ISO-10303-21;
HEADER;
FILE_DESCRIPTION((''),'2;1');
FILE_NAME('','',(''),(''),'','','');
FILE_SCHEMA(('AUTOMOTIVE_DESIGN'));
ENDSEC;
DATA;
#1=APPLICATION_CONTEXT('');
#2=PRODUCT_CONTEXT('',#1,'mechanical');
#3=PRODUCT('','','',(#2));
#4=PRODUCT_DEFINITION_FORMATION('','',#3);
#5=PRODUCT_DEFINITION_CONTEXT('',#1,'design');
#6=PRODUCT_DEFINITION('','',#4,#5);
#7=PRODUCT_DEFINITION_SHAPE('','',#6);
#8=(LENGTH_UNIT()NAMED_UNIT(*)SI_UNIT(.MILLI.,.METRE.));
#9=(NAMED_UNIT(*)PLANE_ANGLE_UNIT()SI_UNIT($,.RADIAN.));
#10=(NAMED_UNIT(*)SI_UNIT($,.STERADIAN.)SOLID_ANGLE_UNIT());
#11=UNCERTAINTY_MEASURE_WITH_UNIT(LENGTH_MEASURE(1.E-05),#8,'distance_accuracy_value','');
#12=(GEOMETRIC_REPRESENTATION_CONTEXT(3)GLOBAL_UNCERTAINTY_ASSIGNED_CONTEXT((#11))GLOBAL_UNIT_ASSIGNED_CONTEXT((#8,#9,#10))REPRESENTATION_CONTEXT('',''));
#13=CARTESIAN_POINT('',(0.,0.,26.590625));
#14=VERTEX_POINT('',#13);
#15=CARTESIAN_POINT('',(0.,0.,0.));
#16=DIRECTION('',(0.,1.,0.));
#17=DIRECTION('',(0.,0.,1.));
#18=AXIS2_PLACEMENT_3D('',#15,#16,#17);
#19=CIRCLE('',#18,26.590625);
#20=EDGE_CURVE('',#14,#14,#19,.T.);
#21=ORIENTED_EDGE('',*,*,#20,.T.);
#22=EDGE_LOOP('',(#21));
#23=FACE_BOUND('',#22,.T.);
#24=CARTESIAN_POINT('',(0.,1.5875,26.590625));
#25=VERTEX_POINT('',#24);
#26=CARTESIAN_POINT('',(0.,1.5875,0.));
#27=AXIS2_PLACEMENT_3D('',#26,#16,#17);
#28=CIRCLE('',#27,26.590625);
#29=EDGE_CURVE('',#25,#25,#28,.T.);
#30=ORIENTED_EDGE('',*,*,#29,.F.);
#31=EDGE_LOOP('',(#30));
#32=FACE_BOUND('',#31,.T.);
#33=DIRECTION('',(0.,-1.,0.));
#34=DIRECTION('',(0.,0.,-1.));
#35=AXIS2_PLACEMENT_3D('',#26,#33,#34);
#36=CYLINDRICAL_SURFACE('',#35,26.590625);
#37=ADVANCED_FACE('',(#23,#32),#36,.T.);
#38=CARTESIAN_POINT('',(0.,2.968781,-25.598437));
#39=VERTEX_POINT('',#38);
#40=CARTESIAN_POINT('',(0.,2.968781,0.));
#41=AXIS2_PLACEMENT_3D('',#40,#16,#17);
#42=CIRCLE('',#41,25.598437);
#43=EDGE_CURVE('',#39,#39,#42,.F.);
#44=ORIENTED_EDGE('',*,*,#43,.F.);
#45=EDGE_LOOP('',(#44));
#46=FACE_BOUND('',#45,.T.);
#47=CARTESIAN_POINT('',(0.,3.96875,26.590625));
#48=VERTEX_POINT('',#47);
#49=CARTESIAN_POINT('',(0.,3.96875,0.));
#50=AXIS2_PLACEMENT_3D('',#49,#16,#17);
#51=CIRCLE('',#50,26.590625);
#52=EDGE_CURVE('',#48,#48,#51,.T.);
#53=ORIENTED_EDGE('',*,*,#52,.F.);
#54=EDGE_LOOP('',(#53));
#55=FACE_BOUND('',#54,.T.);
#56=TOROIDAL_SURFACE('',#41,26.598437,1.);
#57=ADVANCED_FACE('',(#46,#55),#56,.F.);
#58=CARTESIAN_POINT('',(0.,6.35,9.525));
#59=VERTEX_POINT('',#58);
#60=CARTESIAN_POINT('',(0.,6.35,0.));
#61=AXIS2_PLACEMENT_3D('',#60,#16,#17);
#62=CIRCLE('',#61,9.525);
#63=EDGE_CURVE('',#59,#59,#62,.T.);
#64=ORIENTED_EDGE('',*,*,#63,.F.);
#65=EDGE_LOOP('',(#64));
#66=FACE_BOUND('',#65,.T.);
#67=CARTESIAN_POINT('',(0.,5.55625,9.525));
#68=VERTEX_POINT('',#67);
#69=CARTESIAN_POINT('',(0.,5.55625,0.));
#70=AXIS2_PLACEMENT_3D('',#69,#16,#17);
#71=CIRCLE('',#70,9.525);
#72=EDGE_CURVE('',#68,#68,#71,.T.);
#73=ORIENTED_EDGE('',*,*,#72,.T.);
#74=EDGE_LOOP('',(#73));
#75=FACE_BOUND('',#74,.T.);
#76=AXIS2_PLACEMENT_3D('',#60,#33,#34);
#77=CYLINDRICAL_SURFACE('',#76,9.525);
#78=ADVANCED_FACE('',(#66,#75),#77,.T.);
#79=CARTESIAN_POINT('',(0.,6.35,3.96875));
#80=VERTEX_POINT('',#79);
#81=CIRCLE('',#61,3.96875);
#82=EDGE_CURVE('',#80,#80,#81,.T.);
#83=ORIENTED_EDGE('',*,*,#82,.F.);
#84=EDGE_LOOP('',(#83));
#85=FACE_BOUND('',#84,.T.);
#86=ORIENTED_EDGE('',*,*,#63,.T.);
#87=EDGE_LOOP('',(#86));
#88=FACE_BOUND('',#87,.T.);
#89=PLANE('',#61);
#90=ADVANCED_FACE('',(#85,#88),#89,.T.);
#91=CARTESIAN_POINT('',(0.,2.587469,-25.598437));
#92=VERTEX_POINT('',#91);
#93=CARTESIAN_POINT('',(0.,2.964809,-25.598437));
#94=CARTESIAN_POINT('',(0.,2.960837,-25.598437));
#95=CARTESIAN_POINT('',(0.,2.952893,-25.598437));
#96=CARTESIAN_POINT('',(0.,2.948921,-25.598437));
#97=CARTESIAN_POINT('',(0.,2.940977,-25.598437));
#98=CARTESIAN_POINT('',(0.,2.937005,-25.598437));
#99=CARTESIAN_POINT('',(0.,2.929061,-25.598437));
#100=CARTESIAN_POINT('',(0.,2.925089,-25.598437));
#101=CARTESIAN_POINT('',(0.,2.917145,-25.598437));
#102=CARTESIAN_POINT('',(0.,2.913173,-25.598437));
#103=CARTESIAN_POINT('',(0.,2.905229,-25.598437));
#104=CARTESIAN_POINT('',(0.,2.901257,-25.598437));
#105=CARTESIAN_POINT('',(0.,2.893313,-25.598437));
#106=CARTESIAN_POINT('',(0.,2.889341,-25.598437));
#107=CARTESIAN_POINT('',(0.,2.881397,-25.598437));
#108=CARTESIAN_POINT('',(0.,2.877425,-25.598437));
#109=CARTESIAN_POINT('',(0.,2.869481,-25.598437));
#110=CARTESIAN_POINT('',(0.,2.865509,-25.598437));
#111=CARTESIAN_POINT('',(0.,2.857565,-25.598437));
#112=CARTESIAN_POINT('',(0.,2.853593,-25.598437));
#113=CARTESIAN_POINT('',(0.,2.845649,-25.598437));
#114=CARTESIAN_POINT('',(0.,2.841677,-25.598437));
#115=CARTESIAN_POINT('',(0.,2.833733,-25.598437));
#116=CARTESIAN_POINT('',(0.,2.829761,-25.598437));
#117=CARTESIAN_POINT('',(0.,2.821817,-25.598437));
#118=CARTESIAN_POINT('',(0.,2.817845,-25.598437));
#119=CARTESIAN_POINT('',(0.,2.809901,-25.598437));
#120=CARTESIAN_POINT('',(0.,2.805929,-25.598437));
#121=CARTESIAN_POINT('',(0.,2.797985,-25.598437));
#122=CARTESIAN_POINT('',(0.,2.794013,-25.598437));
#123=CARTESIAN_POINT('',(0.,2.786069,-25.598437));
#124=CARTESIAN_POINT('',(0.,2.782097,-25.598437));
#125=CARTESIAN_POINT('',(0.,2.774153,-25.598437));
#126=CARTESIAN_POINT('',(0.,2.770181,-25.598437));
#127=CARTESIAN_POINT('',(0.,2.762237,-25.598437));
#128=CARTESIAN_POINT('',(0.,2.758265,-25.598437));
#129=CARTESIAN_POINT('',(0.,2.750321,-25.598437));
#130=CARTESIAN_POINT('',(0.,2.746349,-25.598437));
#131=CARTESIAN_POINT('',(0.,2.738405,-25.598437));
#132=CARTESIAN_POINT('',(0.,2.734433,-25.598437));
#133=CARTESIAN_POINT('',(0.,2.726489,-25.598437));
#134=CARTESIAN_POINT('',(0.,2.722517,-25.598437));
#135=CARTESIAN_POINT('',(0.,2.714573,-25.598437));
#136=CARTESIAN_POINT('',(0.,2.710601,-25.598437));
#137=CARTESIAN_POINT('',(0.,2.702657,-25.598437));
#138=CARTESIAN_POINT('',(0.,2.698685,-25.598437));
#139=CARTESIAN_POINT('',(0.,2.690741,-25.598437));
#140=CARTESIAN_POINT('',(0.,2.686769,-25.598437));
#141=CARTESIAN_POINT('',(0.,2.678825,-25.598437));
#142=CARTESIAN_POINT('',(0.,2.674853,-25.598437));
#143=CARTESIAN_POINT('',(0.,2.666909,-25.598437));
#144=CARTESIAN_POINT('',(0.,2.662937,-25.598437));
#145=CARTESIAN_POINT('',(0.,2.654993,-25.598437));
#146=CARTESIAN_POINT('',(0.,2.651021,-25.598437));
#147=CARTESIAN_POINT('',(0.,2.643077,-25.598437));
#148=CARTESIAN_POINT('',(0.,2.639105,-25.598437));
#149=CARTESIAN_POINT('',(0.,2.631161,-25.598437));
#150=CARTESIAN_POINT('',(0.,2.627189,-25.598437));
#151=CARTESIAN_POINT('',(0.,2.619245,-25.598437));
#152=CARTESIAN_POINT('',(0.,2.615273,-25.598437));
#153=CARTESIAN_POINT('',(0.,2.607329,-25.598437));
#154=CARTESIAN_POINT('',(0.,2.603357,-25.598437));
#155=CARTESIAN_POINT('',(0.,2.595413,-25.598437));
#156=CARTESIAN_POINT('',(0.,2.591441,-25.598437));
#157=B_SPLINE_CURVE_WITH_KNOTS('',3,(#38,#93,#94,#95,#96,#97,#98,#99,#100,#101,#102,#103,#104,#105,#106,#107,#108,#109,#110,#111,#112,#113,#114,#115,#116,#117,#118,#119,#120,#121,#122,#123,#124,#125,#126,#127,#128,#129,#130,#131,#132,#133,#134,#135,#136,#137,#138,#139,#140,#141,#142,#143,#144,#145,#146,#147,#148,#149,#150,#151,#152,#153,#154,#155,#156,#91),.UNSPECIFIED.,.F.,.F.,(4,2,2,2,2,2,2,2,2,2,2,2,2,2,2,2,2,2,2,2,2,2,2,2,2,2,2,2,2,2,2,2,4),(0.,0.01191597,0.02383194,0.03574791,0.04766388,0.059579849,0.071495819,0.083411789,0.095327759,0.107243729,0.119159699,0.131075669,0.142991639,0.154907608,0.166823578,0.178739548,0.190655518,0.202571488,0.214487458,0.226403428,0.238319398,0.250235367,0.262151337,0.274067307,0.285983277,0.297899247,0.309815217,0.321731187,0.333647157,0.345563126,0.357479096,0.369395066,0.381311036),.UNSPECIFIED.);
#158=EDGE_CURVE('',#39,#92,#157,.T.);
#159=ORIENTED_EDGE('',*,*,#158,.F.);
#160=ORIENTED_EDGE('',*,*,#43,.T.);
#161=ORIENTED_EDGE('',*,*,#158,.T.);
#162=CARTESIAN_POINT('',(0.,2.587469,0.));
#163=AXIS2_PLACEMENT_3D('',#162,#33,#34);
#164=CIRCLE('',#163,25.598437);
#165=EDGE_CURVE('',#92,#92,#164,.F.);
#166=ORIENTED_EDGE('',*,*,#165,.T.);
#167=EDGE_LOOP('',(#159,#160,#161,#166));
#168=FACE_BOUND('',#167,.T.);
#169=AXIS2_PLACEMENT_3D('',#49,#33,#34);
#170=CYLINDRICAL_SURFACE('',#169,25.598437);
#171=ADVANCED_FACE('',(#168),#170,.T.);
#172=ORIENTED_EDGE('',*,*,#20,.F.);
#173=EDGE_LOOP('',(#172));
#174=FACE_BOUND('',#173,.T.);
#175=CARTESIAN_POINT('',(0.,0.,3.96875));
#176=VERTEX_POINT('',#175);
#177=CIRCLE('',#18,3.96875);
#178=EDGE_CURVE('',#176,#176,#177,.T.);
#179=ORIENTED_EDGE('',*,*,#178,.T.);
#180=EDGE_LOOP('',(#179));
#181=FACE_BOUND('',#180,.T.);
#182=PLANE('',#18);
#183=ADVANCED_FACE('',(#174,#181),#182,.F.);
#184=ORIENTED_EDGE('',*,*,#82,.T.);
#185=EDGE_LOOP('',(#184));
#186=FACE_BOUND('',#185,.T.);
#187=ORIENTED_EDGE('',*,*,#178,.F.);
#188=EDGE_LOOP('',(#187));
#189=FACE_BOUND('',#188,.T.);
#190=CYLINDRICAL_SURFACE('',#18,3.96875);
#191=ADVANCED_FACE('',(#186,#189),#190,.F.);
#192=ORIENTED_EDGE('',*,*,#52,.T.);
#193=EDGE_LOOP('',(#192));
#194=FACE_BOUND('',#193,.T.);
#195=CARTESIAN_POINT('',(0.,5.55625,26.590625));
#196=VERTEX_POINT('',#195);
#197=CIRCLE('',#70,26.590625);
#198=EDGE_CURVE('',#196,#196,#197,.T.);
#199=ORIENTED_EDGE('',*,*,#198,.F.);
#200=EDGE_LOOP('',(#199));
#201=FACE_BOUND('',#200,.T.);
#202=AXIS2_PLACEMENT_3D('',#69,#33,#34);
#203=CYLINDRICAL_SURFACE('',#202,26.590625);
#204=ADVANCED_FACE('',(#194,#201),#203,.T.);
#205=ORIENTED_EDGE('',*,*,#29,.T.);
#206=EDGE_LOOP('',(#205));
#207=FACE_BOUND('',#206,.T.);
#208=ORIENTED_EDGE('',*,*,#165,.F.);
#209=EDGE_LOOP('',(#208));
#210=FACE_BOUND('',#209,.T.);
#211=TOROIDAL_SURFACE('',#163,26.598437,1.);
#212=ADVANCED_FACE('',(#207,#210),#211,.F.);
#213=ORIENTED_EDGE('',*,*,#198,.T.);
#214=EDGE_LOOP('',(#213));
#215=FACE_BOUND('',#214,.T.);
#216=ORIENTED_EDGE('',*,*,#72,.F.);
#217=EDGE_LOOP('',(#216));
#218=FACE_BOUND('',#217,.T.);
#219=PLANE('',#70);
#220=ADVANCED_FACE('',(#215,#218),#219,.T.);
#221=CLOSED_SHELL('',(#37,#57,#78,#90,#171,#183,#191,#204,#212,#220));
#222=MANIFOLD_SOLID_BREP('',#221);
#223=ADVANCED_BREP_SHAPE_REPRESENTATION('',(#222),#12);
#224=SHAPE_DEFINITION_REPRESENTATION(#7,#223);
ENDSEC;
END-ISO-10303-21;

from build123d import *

# Parameters (mm, degrees)
SKETCH1_R           = 26.590625
BOSS_EXTRUDE1_DEPTH = 1.5875
SKETCH2_R           = 25.5984375
BOSS_EXTRUDE2_DEPTH = 2.38125
SKETCH3_R           = 26.590625
BOSS_EXTRUDE3_DEPTH = 1.5875
SKETCH5_R           = 9.525
BOSS_EXTRUDE4_DEPTH = 0.79375
SKETCH6_R           = 3.96875
CUT_EXTRUDE1_DEPTH  = 39.137188881
FILLET1_R           = 1
FILLET2_R           = 1


with BuildPart() as part:
    # Sketch1 → Boss-Extrude1 (new body)
    with BuildSketch(Plane(origin=(0, 0, 0), x_dir=(1, 0, 0), z_dir=(0, 1, 0))):
        with Locations(Location((0, 0, 0), (0, 0, 270))):
            Circle(SKETCH1_R)
    extrude(amount=BOSS_EXTRUDE1_DEPTH)

    # Sketch2 → Boss-Extrude2 (add)
    with BuildSketch(Plane(origin=(0, 1.5875, 0), x_dir=(1, 0, 0), z_dir=(0, 1, 0))):
        with Locations(Location((0, 0, 0), (0, 0, 90))):
            Circle(SKETCH2_R)
    extrude(amount=BOSS_EXTRUDE2_DEPTH)

    # Sketch3 → Boss-Extrude3 (add)
    with BuildSketch(Plane(origin=(0, 3.96875, 0), x_dir=(1, 0, 0), z_dir=(0, 1, 0))):
        with Locations(Location((0, 0, 0), (0, 0, 270))):
            Circle(SKETCH3_R)
    extrude(amount=BOSS_EXTRUDE3_DEPTH)

    # Sketch5 → Boss-Extrude4 (add)
    with BuildSketch(Plane(origin=(0, 5.55625, 0), x_dir=(1, 0, 0), z_dir=(0, 1, 0))):
        with Locations(Location((0, 0, 0), (0, 0, 270))):
            Circle(SKETCH5_R)
    extrude(amount=BOSS_EXTRUDE4_DEPTH)

    # Sketch6 → Cut-Extrude1 (cut, through all)
    with BuildSketch(Plane(origin=(0, 6.35, 0), x_dir=(1, 0, 0), z_dir=(0, 1, 0))):
        with Locations(Location((0, 0, 0), (0, 0, 270))):
            Circle(SKETCH6_R)
    extrude(amount=-CUT_EXTRUDE1_DEPTH, mode=Mode.SUBTRACT)

    # Fillet1
    # the kernel refuses this fillet: 1 mm, written as the material it adds along each edge
    with BuildSketch(Plane(origin=(0, 1.5875, 0), x_dir=(0, 0, -1), z_dir=(1, 0, 0))) as fillet1_piece_1_section:
        with BuildLine():
            CenterArc((25.5984375 + FILLET1_R, FILLET1_R), FILLET1_R, 180, 90)
            Line((25.5984375 + FILLET1_R, 0), (25.5984375, 0))
            Line((25.5984375, 0), (25.5984375, FILLET1_R))
        make_face()
    fillet1_piece_1 = revolve(axis=Axis((0, 1.5875, 0), (0, 1, 0)), mode=Mode.PRIVATE)
    fillet1_piece_1 = fillet1_piece_1 & Plane(origin=(0, 1.858804506, 0), x_dir=(0, 0, 1), z_dir=(0, -1, 0)) * Cylinder(26.590625, 107, mode=Mode.PRIVATE)
    add(fillet1_piece_1)

    # Fillet2
    # the kernel refuses this fillet: 1 mm, written as the material it adds along each edge
    with BuildSketch(Plane(origin=(0, 3.96875, 0), x_dir=(0, 0, -1), z_dir=(1, 0, 0))) as fillet2_piece_1_section:
        with BuildLine():
            CenterArc((25.5984375 + FILLET2_R, -FILLET2_R), FILLET2_R, 90, 90)
            Line((25.5984375 + FILLET2_R, 0), (25.5984375, 0))
            Line((25.5984375, 0), (25.5984375, -FILLET2_R))
        make_face()
    fillet2_piece_1 = revolve(axis=Axis((0, 3.96875, 0), (0, 1, 0)), mode=Mode.PRIVATE)
    fillet2_piece_1 = fillet2_piece_1 & Plane(origin=(0, 3.697445494, 0), x_dir=(0, 0, 1), z_dir=(0, -1, 0)) * Cylinder(26.590625, 107, mode=Mode.PRIVATE)
    add(fillet2_piece_1)


solid = part.part
